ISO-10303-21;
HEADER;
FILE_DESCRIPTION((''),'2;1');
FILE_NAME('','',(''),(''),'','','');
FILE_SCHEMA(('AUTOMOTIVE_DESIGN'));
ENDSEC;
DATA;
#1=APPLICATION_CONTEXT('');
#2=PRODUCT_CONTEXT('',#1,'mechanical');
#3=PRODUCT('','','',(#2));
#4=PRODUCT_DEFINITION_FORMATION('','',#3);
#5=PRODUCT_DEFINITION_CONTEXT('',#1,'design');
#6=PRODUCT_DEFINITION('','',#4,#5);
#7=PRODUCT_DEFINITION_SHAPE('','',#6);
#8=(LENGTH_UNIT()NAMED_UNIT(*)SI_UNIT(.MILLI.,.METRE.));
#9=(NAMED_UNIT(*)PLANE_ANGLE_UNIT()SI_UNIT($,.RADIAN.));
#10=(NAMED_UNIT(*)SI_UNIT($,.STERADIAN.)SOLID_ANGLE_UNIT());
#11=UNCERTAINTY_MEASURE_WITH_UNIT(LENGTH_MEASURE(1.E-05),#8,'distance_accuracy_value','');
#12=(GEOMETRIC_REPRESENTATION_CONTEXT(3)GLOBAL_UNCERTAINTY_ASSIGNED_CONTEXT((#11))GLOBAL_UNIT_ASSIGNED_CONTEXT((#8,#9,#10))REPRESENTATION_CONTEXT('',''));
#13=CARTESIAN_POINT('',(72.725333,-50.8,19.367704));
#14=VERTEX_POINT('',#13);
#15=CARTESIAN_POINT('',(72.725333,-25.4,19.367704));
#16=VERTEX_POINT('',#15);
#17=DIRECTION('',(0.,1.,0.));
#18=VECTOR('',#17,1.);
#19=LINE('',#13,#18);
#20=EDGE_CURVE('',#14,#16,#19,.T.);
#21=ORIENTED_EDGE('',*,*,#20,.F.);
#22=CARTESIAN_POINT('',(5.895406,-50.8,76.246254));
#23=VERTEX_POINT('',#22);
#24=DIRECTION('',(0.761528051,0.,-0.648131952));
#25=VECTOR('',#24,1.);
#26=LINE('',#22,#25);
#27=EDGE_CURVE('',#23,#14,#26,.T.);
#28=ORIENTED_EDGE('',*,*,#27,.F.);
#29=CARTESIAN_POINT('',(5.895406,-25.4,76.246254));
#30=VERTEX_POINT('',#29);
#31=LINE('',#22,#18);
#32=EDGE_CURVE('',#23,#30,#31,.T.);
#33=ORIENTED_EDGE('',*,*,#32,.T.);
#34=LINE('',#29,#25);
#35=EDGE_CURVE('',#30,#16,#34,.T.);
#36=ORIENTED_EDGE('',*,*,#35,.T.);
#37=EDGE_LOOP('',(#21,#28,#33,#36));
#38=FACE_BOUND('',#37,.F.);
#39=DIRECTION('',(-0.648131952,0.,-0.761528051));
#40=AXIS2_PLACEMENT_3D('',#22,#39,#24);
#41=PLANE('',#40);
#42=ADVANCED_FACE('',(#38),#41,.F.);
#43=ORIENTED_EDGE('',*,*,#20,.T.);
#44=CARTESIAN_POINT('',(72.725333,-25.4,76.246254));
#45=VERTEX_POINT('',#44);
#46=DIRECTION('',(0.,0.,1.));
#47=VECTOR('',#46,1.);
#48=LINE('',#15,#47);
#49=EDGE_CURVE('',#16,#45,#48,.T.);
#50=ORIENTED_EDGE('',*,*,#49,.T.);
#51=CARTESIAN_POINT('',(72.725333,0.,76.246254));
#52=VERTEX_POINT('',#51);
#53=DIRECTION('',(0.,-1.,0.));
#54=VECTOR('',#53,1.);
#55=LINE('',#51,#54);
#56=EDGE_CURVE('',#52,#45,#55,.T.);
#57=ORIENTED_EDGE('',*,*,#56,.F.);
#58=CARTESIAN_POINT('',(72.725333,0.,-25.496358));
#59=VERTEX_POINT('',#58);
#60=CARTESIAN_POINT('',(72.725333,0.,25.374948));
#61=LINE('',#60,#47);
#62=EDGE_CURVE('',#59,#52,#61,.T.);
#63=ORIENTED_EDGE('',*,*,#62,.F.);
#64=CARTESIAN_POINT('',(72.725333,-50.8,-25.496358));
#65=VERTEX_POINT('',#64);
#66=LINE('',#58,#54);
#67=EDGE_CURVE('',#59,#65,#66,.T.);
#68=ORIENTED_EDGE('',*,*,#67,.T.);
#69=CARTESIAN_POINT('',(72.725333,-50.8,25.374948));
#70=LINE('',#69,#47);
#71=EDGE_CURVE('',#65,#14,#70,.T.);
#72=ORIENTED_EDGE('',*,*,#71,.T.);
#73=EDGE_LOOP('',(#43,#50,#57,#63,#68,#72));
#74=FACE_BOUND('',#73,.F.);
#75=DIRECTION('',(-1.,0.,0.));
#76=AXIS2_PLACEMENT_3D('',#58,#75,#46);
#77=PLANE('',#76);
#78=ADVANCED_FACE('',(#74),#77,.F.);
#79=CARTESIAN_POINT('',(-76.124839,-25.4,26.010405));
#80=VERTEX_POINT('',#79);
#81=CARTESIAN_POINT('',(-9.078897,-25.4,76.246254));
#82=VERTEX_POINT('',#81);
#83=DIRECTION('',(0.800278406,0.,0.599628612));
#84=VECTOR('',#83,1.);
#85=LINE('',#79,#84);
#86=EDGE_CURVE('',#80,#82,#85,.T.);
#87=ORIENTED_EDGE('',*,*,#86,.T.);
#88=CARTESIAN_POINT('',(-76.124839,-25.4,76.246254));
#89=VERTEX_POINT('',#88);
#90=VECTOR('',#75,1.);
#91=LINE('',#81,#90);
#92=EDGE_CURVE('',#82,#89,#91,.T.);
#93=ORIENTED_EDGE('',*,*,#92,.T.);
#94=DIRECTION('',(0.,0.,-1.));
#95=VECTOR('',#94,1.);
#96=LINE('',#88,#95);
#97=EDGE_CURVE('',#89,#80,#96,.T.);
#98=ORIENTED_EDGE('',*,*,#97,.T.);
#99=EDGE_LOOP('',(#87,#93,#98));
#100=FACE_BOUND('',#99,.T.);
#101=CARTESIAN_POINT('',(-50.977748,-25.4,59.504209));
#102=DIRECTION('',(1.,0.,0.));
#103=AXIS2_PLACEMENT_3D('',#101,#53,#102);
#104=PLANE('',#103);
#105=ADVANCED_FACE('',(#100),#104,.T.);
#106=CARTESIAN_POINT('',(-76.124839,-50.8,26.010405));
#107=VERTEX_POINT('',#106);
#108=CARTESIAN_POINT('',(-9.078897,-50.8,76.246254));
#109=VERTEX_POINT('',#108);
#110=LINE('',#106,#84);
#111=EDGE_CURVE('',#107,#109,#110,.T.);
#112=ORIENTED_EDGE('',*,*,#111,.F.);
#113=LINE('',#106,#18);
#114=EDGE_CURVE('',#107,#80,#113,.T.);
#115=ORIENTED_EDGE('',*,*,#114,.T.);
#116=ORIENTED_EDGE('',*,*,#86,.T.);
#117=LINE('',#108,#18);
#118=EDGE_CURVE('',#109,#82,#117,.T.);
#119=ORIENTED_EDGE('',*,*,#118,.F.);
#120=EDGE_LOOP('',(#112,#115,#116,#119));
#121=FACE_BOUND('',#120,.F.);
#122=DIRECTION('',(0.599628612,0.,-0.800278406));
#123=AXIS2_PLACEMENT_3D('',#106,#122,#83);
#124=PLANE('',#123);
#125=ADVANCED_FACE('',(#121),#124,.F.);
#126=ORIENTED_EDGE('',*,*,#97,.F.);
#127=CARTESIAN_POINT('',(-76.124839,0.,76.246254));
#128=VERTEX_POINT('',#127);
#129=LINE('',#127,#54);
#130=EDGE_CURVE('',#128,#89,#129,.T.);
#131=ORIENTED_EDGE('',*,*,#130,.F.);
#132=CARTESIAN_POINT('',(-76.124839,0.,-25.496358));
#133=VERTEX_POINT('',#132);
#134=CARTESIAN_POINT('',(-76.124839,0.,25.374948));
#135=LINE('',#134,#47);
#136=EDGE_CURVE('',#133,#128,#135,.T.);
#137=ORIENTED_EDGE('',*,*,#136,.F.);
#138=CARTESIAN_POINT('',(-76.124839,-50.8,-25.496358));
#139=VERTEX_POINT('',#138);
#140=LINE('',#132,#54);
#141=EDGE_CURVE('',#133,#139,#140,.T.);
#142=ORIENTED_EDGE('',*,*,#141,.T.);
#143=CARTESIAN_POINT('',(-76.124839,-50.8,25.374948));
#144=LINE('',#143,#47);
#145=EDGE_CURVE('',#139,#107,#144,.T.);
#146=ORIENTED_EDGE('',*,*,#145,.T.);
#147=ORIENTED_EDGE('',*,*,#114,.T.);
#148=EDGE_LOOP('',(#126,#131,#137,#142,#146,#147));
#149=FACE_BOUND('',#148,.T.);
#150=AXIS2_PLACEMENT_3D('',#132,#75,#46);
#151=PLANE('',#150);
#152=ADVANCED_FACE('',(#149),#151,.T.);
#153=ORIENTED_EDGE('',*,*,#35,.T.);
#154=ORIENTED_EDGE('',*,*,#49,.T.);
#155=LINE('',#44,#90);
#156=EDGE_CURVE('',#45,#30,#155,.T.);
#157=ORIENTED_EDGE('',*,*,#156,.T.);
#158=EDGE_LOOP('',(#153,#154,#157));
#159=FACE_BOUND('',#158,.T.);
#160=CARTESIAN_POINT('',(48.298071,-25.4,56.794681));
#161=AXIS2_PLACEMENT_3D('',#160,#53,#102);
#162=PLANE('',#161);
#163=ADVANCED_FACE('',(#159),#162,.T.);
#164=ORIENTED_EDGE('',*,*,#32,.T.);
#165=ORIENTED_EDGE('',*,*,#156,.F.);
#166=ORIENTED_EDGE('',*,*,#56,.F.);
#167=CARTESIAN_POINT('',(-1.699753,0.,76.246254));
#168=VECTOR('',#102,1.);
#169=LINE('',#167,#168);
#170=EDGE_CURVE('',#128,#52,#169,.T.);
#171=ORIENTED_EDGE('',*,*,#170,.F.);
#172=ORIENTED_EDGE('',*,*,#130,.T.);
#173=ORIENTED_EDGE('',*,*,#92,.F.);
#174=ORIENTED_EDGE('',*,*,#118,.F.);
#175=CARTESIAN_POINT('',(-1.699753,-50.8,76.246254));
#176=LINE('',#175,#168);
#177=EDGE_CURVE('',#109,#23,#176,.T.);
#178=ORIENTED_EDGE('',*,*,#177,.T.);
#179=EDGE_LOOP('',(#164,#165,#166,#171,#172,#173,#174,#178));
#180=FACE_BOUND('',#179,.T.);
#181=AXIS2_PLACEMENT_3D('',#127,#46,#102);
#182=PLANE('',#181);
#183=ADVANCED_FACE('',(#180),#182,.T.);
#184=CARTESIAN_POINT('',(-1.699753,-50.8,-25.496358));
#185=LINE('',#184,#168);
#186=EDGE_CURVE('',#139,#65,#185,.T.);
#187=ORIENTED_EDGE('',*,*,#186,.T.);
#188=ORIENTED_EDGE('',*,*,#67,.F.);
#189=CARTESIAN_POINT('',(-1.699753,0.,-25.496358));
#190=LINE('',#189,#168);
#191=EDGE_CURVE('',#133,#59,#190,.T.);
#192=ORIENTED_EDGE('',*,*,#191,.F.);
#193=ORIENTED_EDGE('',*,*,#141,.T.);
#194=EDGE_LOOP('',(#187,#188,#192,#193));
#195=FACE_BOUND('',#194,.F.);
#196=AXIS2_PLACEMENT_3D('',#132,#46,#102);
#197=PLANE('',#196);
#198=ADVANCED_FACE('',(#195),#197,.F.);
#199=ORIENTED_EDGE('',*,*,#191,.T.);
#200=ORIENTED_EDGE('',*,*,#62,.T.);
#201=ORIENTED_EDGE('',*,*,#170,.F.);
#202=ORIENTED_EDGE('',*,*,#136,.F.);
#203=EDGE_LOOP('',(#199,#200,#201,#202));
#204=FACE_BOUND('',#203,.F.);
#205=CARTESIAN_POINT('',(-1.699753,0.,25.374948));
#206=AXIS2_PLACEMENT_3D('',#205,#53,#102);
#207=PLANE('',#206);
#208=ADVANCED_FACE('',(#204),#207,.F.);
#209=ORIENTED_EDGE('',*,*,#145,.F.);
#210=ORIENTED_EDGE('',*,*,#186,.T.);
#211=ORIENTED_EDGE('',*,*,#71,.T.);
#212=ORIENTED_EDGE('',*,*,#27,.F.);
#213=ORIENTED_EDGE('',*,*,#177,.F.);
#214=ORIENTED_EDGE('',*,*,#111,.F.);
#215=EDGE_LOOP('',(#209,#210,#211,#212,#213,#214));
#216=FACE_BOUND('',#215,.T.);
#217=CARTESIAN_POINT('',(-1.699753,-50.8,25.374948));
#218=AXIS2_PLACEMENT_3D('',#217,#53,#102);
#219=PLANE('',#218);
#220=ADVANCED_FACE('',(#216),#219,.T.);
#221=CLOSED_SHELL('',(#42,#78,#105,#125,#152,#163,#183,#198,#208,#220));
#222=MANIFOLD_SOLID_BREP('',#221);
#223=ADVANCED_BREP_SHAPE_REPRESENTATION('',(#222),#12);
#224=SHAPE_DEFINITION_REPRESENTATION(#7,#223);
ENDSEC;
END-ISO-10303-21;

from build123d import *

# Parameters (mm, degrees)
F0_W     = 148.8501727581
F0_H     = 101.742612198
F1_DEPTH = 50.8
F3_DEPTH = 25.4


with BuildPart() as f1:
    # F0 (on Front) → F1 (new body)
    with BuildSketch(Plane.XZ):
        with Locations((-1.6997531056, 25.3749480471)):
            Rectangle(F0_W, F0_H)
    extrude(amount=F1_DEPTH)

    # F2 (on face) → F3 (cut)
    with BuildSketch(Plane.XZ.offset(50.8)):
        Polygon((-9.0788973585, 76.2462541461), (-76.1248394847, 76.2462541461), (-76.1248394847, 26.0104050889), align=None)
        Polygon((72.7253332734, 76.2462541461), (5.8954056378, 76.2462541461), (72.7253332734, 19.3677039224), align=None)
    extrude(amount=-F3_DEPTH, mode=Mode.SUBTRACT)


solid = f1.part
